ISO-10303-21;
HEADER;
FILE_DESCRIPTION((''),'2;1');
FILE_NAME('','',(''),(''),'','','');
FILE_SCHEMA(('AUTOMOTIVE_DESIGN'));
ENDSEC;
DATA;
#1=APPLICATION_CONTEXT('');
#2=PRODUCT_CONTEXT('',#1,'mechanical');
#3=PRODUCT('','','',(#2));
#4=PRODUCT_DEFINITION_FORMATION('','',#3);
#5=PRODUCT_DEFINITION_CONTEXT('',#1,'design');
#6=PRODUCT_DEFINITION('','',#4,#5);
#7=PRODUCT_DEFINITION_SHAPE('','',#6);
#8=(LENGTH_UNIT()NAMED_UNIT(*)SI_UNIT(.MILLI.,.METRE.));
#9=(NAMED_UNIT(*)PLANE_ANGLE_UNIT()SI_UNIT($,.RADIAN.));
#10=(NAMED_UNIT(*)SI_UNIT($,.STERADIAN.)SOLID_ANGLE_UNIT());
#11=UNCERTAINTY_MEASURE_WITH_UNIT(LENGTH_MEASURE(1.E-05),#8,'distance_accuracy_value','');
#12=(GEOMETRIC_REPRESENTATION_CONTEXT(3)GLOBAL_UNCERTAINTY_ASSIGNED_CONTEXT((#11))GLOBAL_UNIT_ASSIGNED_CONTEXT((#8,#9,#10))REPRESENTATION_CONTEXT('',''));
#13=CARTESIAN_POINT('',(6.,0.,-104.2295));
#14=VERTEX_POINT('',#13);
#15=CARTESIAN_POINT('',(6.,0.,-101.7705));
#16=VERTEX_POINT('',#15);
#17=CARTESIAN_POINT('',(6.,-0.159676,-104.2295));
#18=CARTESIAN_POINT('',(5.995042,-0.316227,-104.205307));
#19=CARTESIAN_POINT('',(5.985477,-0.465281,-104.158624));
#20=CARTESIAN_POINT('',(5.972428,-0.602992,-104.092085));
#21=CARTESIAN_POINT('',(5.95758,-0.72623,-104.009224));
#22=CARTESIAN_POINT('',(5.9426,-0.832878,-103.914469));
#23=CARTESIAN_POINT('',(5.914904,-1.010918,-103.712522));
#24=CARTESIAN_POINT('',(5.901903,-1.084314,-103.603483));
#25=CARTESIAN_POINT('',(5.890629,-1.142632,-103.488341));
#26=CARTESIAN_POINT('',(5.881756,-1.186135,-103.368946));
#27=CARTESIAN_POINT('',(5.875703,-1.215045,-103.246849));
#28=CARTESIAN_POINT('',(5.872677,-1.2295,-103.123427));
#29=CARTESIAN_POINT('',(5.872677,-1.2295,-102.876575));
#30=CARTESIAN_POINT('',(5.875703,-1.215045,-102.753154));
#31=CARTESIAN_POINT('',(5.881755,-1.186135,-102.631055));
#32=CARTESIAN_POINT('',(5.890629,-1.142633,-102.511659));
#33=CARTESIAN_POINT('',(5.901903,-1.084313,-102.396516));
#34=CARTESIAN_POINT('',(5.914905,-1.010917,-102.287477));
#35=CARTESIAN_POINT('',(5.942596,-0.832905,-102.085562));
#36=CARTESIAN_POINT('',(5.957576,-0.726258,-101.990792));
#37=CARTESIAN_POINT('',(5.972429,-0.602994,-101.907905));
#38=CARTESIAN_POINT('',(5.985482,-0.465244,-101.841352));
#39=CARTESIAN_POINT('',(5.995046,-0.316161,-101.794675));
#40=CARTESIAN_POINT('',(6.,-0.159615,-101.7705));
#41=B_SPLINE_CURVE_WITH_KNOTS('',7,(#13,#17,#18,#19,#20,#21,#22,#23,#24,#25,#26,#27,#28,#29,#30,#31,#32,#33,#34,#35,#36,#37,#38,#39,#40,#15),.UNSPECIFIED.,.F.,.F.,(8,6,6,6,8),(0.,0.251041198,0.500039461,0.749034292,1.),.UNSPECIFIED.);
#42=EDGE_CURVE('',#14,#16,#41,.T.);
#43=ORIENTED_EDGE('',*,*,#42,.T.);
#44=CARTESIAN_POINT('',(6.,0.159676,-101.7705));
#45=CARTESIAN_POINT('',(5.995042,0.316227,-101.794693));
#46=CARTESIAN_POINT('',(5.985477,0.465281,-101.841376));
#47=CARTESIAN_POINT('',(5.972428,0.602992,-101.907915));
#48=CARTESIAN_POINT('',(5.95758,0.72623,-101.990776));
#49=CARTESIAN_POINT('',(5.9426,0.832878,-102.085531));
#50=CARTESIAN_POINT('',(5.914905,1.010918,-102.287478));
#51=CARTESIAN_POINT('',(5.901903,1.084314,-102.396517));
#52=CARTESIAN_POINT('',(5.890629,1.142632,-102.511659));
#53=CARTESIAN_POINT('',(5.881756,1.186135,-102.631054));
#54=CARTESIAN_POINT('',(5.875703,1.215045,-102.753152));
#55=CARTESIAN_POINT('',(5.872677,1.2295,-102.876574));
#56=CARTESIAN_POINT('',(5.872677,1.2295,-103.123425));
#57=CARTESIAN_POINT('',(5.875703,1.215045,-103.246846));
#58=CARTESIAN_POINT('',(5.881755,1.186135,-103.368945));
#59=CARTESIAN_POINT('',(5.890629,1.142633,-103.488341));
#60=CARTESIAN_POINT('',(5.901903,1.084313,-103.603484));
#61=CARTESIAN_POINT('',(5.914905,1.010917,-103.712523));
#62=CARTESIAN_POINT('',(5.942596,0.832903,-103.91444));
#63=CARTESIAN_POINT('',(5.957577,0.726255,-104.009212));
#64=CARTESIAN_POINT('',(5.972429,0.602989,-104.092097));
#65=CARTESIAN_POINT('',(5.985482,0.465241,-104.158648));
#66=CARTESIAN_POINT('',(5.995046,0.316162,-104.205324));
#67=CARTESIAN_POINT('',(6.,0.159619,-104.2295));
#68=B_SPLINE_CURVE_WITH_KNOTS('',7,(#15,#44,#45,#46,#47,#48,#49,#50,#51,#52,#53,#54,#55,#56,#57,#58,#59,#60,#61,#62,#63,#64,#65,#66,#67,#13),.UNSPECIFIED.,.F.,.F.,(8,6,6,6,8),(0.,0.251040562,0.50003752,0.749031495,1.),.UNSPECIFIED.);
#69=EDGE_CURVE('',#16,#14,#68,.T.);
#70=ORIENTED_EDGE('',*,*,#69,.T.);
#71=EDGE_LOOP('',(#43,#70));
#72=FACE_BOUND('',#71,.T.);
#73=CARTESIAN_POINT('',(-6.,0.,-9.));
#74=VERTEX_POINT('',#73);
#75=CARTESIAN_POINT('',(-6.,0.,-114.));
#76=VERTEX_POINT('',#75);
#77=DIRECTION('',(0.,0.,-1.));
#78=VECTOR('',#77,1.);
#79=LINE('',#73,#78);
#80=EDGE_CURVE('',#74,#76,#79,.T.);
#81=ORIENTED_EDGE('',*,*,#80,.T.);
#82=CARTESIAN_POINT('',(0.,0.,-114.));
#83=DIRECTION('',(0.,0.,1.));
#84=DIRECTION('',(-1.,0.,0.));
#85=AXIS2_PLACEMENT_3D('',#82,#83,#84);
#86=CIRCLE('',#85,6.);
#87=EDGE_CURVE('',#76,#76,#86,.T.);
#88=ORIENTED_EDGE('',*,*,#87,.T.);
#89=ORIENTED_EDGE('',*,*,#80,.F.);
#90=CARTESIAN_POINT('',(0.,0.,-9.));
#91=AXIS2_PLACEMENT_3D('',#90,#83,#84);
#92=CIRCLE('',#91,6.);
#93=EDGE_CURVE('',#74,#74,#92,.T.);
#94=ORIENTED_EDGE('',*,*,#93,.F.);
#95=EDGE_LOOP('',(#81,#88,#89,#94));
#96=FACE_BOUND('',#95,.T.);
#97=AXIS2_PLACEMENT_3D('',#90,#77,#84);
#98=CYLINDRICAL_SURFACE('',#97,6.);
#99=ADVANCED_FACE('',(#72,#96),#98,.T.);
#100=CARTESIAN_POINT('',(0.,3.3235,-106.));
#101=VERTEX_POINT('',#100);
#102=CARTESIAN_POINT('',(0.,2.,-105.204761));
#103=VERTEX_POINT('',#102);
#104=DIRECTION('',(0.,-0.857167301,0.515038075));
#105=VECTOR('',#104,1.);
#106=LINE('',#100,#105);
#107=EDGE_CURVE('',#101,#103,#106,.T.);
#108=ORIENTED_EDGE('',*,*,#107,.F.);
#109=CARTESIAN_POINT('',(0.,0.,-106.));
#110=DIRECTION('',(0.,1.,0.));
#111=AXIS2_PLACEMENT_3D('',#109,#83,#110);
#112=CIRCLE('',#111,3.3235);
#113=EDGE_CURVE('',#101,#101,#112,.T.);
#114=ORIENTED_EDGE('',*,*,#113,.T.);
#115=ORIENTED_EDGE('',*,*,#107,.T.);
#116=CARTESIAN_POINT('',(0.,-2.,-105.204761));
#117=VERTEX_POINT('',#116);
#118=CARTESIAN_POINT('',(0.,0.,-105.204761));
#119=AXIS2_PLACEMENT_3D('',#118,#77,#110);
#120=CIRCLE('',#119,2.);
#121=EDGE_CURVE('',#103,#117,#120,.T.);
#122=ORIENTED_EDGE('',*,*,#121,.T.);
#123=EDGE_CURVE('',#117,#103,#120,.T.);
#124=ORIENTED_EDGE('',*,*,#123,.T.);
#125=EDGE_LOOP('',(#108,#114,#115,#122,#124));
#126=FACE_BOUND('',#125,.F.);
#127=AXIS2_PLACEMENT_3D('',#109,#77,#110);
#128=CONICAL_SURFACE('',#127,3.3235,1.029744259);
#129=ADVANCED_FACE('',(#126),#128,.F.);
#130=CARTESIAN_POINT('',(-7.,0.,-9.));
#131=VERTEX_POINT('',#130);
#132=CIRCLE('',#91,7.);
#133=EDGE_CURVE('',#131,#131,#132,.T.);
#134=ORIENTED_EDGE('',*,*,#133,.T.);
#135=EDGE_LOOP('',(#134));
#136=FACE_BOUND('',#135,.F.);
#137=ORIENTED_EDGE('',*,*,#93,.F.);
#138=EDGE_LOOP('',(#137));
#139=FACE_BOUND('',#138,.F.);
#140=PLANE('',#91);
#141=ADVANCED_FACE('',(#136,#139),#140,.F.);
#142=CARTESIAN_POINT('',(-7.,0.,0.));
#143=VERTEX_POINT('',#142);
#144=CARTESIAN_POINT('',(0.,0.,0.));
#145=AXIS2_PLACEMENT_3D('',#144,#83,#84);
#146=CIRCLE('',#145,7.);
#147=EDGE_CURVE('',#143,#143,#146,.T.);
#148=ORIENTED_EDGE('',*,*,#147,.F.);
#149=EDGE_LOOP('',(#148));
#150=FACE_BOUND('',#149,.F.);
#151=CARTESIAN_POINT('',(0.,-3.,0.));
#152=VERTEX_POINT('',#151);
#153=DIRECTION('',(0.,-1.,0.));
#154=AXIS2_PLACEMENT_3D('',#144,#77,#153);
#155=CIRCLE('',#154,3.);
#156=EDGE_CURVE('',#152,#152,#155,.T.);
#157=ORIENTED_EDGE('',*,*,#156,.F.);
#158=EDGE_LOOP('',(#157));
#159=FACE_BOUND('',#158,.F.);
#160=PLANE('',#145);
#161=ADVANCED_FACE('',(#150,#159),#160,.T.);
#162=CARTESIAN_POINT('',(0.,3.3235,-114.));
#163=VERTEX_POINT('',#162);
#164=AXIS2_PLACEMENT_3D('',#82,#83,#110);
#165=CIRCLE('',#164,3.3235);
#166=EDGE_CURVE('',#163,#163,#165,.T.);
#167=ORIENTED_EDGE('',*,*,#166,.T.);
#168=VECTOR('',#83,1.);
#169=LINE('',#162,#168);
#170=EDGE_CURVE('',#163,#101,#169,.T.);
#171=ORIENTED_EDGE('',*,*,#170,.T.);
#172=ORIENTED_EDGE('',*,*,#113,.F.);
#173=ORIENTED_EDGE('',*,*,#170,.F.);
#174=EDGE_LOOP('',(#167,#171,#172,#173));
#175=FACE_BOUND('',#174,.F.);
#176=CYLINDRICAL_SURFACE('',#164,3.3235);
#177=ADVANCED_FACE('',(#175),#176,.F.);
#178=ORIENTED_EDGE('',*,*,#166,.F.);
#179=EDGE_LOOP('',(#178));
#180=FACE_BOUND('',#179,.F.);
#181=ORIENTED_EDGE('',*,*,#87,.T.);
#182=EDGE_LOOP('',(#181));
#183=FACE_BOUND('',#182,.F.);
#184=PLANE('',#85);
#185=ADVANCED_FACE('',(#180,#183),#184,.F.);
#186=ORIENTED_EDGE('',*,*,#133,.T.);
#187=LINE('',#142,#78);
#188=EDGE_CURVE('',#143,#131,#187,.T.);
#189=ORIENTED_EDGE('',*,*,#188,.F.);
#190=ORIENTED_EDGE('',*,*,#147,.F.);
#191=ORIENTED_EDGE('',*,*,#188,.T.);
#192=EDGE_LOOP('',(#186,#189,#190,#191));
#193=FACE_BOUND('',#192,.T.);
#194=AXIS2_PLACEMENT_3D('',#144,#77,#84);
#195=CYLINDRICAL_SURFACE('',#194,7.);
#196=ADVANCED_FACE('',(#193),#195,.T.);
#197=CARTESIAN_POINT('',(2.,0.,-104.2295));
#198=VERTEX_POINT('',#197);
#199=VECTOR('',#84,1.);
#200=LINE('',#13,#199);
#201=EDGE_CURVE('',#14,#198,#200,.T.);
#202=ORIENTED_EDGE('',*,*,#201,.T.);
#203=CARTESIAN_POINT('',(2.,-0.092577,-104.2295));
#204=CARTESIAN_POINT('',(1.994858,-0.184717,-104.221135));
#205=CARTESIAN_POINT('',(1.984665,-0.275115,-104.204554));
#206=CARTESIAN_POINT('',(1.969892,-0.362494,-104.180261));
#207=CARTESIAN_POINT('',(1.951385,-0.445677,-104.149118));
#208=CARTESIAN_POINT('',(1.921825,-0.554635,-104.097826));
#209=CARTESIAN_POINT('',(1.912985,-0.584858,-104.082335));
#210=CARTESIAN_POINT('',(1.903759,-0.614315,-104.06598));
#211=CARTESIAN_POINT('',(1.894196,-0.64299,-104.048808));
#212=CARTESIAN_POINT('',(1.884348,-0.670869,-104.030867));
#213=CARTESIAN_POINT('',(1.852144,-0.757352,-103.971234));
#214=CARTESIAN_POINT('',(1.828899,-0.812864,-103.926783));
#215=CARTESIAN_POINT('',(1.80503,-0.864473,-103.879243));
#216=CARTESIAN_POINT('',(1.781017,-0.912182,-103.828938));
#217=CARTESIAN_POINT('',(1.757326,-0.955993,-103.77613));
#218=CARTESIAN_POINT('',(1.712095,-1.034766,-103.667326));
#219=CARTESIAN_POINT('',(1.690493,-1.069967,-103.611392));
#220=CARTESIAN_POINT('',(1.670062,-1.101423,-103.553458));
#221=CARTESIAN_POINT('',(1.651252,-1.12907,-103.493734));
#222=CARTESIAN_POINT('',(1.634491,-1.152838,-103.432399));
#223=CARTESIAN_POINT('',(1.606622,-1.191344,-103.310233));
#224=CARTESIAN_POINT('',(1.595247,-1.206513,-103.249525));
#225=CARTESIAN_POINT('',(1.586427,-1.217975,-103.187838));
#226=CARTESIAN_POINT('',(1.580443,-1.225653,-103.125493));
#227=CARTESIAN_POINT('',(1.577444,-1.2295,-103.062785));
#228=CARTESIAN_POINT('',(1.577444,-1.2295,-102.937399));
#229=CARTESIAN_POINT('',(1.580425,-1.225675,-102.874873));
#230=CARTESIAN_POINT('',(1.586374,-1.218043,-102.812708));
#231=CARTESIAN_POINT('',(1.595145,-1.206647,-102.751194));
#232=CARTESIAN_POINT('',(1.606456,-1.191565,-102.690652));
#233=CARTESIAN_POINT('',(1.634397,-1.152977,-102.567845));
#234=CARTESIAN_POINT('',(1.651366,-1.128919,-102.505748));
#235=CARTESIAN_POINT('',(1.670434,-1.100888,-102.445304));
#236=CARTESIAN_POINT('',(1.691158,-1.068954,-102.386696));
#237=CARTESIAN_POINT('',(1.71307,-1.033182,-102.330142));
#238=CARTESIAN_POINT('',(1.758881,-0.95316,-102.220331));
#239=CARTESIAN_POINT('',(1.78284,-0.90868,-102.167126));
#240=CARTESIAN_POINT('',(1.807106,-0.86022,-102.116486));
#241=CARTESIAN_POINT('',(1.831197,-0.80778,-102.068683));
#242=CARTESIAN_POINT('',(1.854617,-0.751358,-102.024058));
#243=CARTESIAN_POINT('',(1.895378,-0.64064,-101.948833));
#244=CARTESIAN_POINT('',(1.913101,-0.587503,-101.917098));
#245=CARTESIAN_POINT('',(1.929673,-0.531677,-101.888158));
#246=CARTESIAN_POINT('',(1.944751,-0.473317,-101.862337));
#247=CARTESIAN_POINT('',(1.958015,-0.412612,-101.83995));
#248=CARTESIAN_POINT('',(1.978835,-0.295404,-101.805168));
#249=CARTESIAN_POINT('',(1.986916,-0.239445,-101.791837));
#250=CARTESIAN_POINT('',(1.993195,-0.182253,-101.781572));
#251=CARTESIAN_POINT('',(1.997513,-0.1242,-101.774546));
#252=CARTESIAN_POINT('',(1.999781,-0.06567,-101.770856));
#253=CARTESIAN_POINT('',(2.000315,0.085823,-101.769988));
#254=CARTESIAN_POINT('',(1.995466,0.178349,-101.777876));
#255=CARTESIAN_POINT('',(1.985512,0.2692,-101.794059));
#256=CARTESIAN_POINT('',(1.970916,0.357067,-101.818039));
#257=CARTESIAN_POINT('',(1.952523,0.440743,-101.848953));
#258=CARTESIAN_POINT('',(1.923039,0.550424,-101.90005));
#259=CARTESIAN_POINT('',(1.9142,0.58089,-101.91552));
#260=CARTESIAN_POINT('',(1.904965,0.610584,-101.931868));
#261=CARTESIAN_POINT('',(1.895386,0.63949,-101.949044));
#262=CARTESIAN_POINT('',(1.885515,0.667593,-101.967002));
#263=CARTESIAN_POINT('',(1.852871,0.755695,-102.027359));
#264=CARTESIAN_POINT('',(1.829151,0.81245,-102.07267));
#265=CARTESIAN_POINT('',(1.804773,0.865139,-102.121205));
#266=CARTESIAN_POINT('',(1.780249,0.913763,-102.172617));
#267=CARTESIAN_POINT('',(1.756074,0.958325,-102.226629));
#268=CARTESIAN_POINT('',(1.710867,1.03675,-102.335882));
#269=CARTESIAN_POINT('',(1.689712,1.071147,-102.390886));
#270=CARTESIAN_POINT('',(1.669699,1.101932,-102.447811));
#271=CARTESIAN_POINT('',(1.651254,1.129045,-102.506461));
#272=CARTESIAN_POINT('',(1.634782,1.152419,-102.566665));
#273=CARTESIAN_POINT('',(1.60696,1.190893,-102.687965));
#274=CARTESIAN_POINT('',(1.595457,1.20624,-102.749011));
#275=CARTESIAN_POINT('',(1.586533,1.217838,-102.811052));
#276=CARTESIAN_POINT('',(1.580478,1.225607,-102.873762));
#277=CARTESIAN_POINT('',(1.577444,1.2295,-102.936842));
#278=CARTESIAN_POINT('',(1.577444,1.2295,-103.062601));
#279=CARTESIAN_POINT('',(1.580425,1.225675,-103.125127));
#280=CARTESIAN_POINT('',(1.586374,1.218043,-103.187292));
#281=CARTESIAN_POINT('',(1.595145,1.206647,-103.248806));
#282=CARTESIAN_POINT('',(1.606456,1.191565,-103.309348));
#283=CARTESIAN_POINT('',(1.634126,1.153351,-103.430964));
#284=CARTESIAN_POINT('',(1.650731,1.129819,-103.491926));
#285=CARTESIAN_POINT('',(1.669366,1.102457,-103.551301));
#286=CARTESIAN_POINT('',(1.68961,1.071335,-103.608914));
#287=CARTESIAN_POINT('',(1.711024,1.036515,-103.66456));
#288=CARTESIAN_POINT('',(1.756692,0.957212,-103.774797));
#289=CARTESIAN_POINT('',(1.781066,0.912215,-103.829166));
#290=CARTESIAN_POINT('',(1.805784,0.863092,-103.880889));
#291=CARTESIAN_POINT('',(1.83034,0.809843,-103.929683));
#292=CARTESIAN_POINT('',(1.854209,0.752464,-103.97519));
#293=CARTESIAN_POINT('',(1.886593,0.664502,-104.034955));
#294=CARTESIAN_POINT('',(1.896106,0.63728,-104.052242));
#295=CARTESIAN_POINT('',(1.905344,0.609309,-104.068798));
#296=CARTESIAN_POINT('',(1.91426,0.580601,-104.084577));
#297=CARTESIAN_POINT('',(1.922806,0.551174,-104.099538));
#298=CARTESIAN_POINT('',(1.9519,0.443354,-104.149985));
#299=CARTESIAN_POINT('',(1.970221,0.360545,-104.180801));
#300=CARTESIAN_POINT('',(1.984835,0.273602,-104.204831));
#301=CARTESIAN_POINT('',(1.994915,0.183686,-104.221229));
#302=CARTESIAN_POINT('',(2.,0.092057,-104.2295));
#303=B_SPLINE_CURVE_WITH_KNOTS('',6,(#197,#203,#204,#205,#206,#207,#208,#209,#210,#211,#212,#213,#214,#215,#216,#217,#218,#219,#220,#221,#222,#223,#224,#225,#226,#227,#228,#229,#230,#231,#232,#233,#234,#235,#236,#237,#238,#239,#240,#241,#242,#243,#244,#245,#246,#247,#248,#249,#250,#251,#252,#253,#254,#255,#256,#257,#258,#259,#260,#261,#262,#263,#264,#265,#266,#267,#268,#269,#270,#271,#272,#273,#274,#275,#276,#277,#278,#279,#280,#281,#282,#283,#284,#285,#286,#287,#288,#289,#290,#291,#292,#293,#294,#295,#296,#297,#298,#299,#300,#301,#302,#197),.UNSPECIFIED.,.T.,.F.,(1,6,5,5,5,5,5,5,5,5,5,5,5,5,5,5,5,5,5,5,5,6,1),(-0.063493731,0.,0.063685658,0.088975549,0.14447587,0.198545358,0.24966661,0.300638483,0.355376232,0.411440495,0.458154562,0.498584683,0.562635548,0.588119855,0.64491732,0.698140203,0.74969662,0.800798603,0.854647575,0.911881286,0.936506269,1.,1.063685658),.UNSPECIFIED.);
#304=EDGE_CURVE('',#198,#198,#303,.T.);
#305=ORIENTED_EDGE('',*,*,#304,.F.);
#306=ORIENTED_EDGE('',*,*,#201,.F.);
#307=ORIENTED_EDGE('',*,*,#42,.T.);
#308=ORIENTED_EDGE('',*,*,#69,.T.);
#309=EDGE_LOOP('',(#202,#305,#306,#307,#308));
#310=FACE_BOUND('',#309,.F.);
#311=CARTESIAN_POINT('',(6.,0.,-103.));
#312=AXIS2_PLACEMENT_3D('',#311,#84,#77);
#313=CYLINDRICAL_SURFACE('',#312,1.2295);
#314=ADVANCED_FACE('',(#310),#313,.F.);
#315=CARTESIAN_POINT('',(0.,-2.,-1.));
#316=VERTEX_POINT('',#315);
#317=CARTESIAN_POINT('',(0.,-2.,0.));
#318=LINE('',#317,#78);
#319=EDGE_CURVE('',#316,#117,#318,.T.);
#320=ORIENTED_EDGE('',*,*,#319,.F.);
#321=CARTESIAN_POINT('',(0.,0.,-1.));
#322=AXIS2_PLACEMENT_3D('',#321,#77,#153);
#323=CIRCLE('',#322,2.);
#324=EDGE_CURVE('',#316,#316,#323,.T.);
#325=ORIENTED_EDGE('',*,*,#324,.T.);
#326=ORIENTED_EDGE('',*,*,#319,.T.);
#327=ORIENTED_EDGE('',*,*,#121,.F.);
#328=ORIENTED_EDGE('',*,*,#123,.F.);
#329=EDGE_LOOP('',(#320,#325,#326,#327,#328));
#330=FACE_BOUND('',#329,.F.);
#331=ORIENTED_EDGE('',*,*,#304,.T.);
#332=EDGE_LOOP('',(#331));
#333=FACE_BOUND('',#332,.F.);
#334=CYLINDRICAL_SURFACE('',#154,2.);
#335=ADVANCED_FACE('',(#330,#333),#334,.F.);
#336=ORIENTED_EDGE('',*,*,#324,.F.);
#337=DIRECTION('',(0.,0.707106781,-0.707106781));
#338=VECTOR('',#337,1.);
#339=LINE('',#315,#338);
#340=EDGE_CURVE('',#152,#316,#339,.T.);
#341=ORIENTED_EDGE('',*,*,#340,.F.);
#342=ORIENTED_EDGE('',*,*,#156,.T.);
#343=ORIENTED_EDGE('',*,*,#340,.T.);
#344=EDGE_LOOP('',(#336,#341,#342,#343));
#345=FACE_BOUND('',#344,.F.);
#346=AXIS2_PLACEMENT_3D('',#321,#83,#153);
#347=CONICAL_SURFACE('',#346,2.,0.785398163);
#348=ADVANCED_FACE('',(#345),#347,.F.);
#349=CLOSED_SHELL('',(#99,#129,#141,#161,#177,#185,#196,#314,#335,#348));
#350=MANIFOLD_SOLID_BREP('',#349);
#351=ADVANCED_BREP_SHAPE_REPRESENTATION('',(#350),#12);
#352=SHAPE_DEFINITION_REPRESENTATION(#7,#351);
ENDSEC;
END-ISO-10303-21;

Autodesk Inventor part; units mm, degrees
ref_plane "XZ Plane" through (0, 0, 0) normal (0, 1, 0) x (-1, 0, 0)
ref_plane "XY Plane" through (0, 0, 0) normal (0, 0, 1) x (1, 0, 0)
sketch "Skizze1" plane through (0, 0, 0) normal (0, 1, 0) x (-1, 0, 0)
  line L0 (0, 0) -> (7, 0)
  line L1 (7, 0) -> (7, -9)
  line L2 (7, -9) -> (6, -9)
  line L3 (6, -9) -> (6, -114)
  line L4 (6, -114) -> (0, -114)
  line L5 (0, -114) -> (0, 0)
  dimension "d0" = 7
  dimension "d1" = 6
  dimension "d2" = 9
  dimension "d3" = 105
revolve "Umdrehung2" add sketch "Skizze1" angle 360 about axis through (0, 0, -114) along (0, 0, 1)
sketch "Skizze3" plane through (0, 0, -114) normal (0, 0, -1) x (-1, 0, 0)
  point P0 (0, 0)
  point P1 (0, 0)
hole "Bohrung2" at (0, 0, -114) direction (0, 0, 1) diameter 6.647 depth 8 tip angle 118 thread size "M8x1.25" class "6H" standard "ISO Metric profile"
sketch "Skizze4" plane through (0, 0, 0) normal (0, 0, 1) x (1, 0, 0)
  circle A0 centre (0, 0) radius 3.3235 projected
  point P0 (0, 0)
hole "Bohrung3" at (0, 0, 0) direction (0, 0, -1) diameter 4 end through all
chamfer "Fase2" distance 1 angle 45 1 edges at (0, 2, 0)
ref_plane "Arbeitsebene2" through (6, 0, 0) normal (1, 0, 0) x (0, 1, 0)
sketch "Skizze5" plane through (6, 0, 0) normal (1, 0, 0) x (0, 1, 0)
  line L0 (-6, -114) -> (6, -114) projected
  line L1 (0, 0) -> (0, -114)
  point P0 (0, -103)
  dimension "d39" = 11
hole "Bohrung4" at (6, 0, -103) direction (-1, 0, 0) diameter 2.459 end up to surface thread size "M3x0.5" class "6H" standard "ISO Metric profile"
properties part number "Glashalter"
